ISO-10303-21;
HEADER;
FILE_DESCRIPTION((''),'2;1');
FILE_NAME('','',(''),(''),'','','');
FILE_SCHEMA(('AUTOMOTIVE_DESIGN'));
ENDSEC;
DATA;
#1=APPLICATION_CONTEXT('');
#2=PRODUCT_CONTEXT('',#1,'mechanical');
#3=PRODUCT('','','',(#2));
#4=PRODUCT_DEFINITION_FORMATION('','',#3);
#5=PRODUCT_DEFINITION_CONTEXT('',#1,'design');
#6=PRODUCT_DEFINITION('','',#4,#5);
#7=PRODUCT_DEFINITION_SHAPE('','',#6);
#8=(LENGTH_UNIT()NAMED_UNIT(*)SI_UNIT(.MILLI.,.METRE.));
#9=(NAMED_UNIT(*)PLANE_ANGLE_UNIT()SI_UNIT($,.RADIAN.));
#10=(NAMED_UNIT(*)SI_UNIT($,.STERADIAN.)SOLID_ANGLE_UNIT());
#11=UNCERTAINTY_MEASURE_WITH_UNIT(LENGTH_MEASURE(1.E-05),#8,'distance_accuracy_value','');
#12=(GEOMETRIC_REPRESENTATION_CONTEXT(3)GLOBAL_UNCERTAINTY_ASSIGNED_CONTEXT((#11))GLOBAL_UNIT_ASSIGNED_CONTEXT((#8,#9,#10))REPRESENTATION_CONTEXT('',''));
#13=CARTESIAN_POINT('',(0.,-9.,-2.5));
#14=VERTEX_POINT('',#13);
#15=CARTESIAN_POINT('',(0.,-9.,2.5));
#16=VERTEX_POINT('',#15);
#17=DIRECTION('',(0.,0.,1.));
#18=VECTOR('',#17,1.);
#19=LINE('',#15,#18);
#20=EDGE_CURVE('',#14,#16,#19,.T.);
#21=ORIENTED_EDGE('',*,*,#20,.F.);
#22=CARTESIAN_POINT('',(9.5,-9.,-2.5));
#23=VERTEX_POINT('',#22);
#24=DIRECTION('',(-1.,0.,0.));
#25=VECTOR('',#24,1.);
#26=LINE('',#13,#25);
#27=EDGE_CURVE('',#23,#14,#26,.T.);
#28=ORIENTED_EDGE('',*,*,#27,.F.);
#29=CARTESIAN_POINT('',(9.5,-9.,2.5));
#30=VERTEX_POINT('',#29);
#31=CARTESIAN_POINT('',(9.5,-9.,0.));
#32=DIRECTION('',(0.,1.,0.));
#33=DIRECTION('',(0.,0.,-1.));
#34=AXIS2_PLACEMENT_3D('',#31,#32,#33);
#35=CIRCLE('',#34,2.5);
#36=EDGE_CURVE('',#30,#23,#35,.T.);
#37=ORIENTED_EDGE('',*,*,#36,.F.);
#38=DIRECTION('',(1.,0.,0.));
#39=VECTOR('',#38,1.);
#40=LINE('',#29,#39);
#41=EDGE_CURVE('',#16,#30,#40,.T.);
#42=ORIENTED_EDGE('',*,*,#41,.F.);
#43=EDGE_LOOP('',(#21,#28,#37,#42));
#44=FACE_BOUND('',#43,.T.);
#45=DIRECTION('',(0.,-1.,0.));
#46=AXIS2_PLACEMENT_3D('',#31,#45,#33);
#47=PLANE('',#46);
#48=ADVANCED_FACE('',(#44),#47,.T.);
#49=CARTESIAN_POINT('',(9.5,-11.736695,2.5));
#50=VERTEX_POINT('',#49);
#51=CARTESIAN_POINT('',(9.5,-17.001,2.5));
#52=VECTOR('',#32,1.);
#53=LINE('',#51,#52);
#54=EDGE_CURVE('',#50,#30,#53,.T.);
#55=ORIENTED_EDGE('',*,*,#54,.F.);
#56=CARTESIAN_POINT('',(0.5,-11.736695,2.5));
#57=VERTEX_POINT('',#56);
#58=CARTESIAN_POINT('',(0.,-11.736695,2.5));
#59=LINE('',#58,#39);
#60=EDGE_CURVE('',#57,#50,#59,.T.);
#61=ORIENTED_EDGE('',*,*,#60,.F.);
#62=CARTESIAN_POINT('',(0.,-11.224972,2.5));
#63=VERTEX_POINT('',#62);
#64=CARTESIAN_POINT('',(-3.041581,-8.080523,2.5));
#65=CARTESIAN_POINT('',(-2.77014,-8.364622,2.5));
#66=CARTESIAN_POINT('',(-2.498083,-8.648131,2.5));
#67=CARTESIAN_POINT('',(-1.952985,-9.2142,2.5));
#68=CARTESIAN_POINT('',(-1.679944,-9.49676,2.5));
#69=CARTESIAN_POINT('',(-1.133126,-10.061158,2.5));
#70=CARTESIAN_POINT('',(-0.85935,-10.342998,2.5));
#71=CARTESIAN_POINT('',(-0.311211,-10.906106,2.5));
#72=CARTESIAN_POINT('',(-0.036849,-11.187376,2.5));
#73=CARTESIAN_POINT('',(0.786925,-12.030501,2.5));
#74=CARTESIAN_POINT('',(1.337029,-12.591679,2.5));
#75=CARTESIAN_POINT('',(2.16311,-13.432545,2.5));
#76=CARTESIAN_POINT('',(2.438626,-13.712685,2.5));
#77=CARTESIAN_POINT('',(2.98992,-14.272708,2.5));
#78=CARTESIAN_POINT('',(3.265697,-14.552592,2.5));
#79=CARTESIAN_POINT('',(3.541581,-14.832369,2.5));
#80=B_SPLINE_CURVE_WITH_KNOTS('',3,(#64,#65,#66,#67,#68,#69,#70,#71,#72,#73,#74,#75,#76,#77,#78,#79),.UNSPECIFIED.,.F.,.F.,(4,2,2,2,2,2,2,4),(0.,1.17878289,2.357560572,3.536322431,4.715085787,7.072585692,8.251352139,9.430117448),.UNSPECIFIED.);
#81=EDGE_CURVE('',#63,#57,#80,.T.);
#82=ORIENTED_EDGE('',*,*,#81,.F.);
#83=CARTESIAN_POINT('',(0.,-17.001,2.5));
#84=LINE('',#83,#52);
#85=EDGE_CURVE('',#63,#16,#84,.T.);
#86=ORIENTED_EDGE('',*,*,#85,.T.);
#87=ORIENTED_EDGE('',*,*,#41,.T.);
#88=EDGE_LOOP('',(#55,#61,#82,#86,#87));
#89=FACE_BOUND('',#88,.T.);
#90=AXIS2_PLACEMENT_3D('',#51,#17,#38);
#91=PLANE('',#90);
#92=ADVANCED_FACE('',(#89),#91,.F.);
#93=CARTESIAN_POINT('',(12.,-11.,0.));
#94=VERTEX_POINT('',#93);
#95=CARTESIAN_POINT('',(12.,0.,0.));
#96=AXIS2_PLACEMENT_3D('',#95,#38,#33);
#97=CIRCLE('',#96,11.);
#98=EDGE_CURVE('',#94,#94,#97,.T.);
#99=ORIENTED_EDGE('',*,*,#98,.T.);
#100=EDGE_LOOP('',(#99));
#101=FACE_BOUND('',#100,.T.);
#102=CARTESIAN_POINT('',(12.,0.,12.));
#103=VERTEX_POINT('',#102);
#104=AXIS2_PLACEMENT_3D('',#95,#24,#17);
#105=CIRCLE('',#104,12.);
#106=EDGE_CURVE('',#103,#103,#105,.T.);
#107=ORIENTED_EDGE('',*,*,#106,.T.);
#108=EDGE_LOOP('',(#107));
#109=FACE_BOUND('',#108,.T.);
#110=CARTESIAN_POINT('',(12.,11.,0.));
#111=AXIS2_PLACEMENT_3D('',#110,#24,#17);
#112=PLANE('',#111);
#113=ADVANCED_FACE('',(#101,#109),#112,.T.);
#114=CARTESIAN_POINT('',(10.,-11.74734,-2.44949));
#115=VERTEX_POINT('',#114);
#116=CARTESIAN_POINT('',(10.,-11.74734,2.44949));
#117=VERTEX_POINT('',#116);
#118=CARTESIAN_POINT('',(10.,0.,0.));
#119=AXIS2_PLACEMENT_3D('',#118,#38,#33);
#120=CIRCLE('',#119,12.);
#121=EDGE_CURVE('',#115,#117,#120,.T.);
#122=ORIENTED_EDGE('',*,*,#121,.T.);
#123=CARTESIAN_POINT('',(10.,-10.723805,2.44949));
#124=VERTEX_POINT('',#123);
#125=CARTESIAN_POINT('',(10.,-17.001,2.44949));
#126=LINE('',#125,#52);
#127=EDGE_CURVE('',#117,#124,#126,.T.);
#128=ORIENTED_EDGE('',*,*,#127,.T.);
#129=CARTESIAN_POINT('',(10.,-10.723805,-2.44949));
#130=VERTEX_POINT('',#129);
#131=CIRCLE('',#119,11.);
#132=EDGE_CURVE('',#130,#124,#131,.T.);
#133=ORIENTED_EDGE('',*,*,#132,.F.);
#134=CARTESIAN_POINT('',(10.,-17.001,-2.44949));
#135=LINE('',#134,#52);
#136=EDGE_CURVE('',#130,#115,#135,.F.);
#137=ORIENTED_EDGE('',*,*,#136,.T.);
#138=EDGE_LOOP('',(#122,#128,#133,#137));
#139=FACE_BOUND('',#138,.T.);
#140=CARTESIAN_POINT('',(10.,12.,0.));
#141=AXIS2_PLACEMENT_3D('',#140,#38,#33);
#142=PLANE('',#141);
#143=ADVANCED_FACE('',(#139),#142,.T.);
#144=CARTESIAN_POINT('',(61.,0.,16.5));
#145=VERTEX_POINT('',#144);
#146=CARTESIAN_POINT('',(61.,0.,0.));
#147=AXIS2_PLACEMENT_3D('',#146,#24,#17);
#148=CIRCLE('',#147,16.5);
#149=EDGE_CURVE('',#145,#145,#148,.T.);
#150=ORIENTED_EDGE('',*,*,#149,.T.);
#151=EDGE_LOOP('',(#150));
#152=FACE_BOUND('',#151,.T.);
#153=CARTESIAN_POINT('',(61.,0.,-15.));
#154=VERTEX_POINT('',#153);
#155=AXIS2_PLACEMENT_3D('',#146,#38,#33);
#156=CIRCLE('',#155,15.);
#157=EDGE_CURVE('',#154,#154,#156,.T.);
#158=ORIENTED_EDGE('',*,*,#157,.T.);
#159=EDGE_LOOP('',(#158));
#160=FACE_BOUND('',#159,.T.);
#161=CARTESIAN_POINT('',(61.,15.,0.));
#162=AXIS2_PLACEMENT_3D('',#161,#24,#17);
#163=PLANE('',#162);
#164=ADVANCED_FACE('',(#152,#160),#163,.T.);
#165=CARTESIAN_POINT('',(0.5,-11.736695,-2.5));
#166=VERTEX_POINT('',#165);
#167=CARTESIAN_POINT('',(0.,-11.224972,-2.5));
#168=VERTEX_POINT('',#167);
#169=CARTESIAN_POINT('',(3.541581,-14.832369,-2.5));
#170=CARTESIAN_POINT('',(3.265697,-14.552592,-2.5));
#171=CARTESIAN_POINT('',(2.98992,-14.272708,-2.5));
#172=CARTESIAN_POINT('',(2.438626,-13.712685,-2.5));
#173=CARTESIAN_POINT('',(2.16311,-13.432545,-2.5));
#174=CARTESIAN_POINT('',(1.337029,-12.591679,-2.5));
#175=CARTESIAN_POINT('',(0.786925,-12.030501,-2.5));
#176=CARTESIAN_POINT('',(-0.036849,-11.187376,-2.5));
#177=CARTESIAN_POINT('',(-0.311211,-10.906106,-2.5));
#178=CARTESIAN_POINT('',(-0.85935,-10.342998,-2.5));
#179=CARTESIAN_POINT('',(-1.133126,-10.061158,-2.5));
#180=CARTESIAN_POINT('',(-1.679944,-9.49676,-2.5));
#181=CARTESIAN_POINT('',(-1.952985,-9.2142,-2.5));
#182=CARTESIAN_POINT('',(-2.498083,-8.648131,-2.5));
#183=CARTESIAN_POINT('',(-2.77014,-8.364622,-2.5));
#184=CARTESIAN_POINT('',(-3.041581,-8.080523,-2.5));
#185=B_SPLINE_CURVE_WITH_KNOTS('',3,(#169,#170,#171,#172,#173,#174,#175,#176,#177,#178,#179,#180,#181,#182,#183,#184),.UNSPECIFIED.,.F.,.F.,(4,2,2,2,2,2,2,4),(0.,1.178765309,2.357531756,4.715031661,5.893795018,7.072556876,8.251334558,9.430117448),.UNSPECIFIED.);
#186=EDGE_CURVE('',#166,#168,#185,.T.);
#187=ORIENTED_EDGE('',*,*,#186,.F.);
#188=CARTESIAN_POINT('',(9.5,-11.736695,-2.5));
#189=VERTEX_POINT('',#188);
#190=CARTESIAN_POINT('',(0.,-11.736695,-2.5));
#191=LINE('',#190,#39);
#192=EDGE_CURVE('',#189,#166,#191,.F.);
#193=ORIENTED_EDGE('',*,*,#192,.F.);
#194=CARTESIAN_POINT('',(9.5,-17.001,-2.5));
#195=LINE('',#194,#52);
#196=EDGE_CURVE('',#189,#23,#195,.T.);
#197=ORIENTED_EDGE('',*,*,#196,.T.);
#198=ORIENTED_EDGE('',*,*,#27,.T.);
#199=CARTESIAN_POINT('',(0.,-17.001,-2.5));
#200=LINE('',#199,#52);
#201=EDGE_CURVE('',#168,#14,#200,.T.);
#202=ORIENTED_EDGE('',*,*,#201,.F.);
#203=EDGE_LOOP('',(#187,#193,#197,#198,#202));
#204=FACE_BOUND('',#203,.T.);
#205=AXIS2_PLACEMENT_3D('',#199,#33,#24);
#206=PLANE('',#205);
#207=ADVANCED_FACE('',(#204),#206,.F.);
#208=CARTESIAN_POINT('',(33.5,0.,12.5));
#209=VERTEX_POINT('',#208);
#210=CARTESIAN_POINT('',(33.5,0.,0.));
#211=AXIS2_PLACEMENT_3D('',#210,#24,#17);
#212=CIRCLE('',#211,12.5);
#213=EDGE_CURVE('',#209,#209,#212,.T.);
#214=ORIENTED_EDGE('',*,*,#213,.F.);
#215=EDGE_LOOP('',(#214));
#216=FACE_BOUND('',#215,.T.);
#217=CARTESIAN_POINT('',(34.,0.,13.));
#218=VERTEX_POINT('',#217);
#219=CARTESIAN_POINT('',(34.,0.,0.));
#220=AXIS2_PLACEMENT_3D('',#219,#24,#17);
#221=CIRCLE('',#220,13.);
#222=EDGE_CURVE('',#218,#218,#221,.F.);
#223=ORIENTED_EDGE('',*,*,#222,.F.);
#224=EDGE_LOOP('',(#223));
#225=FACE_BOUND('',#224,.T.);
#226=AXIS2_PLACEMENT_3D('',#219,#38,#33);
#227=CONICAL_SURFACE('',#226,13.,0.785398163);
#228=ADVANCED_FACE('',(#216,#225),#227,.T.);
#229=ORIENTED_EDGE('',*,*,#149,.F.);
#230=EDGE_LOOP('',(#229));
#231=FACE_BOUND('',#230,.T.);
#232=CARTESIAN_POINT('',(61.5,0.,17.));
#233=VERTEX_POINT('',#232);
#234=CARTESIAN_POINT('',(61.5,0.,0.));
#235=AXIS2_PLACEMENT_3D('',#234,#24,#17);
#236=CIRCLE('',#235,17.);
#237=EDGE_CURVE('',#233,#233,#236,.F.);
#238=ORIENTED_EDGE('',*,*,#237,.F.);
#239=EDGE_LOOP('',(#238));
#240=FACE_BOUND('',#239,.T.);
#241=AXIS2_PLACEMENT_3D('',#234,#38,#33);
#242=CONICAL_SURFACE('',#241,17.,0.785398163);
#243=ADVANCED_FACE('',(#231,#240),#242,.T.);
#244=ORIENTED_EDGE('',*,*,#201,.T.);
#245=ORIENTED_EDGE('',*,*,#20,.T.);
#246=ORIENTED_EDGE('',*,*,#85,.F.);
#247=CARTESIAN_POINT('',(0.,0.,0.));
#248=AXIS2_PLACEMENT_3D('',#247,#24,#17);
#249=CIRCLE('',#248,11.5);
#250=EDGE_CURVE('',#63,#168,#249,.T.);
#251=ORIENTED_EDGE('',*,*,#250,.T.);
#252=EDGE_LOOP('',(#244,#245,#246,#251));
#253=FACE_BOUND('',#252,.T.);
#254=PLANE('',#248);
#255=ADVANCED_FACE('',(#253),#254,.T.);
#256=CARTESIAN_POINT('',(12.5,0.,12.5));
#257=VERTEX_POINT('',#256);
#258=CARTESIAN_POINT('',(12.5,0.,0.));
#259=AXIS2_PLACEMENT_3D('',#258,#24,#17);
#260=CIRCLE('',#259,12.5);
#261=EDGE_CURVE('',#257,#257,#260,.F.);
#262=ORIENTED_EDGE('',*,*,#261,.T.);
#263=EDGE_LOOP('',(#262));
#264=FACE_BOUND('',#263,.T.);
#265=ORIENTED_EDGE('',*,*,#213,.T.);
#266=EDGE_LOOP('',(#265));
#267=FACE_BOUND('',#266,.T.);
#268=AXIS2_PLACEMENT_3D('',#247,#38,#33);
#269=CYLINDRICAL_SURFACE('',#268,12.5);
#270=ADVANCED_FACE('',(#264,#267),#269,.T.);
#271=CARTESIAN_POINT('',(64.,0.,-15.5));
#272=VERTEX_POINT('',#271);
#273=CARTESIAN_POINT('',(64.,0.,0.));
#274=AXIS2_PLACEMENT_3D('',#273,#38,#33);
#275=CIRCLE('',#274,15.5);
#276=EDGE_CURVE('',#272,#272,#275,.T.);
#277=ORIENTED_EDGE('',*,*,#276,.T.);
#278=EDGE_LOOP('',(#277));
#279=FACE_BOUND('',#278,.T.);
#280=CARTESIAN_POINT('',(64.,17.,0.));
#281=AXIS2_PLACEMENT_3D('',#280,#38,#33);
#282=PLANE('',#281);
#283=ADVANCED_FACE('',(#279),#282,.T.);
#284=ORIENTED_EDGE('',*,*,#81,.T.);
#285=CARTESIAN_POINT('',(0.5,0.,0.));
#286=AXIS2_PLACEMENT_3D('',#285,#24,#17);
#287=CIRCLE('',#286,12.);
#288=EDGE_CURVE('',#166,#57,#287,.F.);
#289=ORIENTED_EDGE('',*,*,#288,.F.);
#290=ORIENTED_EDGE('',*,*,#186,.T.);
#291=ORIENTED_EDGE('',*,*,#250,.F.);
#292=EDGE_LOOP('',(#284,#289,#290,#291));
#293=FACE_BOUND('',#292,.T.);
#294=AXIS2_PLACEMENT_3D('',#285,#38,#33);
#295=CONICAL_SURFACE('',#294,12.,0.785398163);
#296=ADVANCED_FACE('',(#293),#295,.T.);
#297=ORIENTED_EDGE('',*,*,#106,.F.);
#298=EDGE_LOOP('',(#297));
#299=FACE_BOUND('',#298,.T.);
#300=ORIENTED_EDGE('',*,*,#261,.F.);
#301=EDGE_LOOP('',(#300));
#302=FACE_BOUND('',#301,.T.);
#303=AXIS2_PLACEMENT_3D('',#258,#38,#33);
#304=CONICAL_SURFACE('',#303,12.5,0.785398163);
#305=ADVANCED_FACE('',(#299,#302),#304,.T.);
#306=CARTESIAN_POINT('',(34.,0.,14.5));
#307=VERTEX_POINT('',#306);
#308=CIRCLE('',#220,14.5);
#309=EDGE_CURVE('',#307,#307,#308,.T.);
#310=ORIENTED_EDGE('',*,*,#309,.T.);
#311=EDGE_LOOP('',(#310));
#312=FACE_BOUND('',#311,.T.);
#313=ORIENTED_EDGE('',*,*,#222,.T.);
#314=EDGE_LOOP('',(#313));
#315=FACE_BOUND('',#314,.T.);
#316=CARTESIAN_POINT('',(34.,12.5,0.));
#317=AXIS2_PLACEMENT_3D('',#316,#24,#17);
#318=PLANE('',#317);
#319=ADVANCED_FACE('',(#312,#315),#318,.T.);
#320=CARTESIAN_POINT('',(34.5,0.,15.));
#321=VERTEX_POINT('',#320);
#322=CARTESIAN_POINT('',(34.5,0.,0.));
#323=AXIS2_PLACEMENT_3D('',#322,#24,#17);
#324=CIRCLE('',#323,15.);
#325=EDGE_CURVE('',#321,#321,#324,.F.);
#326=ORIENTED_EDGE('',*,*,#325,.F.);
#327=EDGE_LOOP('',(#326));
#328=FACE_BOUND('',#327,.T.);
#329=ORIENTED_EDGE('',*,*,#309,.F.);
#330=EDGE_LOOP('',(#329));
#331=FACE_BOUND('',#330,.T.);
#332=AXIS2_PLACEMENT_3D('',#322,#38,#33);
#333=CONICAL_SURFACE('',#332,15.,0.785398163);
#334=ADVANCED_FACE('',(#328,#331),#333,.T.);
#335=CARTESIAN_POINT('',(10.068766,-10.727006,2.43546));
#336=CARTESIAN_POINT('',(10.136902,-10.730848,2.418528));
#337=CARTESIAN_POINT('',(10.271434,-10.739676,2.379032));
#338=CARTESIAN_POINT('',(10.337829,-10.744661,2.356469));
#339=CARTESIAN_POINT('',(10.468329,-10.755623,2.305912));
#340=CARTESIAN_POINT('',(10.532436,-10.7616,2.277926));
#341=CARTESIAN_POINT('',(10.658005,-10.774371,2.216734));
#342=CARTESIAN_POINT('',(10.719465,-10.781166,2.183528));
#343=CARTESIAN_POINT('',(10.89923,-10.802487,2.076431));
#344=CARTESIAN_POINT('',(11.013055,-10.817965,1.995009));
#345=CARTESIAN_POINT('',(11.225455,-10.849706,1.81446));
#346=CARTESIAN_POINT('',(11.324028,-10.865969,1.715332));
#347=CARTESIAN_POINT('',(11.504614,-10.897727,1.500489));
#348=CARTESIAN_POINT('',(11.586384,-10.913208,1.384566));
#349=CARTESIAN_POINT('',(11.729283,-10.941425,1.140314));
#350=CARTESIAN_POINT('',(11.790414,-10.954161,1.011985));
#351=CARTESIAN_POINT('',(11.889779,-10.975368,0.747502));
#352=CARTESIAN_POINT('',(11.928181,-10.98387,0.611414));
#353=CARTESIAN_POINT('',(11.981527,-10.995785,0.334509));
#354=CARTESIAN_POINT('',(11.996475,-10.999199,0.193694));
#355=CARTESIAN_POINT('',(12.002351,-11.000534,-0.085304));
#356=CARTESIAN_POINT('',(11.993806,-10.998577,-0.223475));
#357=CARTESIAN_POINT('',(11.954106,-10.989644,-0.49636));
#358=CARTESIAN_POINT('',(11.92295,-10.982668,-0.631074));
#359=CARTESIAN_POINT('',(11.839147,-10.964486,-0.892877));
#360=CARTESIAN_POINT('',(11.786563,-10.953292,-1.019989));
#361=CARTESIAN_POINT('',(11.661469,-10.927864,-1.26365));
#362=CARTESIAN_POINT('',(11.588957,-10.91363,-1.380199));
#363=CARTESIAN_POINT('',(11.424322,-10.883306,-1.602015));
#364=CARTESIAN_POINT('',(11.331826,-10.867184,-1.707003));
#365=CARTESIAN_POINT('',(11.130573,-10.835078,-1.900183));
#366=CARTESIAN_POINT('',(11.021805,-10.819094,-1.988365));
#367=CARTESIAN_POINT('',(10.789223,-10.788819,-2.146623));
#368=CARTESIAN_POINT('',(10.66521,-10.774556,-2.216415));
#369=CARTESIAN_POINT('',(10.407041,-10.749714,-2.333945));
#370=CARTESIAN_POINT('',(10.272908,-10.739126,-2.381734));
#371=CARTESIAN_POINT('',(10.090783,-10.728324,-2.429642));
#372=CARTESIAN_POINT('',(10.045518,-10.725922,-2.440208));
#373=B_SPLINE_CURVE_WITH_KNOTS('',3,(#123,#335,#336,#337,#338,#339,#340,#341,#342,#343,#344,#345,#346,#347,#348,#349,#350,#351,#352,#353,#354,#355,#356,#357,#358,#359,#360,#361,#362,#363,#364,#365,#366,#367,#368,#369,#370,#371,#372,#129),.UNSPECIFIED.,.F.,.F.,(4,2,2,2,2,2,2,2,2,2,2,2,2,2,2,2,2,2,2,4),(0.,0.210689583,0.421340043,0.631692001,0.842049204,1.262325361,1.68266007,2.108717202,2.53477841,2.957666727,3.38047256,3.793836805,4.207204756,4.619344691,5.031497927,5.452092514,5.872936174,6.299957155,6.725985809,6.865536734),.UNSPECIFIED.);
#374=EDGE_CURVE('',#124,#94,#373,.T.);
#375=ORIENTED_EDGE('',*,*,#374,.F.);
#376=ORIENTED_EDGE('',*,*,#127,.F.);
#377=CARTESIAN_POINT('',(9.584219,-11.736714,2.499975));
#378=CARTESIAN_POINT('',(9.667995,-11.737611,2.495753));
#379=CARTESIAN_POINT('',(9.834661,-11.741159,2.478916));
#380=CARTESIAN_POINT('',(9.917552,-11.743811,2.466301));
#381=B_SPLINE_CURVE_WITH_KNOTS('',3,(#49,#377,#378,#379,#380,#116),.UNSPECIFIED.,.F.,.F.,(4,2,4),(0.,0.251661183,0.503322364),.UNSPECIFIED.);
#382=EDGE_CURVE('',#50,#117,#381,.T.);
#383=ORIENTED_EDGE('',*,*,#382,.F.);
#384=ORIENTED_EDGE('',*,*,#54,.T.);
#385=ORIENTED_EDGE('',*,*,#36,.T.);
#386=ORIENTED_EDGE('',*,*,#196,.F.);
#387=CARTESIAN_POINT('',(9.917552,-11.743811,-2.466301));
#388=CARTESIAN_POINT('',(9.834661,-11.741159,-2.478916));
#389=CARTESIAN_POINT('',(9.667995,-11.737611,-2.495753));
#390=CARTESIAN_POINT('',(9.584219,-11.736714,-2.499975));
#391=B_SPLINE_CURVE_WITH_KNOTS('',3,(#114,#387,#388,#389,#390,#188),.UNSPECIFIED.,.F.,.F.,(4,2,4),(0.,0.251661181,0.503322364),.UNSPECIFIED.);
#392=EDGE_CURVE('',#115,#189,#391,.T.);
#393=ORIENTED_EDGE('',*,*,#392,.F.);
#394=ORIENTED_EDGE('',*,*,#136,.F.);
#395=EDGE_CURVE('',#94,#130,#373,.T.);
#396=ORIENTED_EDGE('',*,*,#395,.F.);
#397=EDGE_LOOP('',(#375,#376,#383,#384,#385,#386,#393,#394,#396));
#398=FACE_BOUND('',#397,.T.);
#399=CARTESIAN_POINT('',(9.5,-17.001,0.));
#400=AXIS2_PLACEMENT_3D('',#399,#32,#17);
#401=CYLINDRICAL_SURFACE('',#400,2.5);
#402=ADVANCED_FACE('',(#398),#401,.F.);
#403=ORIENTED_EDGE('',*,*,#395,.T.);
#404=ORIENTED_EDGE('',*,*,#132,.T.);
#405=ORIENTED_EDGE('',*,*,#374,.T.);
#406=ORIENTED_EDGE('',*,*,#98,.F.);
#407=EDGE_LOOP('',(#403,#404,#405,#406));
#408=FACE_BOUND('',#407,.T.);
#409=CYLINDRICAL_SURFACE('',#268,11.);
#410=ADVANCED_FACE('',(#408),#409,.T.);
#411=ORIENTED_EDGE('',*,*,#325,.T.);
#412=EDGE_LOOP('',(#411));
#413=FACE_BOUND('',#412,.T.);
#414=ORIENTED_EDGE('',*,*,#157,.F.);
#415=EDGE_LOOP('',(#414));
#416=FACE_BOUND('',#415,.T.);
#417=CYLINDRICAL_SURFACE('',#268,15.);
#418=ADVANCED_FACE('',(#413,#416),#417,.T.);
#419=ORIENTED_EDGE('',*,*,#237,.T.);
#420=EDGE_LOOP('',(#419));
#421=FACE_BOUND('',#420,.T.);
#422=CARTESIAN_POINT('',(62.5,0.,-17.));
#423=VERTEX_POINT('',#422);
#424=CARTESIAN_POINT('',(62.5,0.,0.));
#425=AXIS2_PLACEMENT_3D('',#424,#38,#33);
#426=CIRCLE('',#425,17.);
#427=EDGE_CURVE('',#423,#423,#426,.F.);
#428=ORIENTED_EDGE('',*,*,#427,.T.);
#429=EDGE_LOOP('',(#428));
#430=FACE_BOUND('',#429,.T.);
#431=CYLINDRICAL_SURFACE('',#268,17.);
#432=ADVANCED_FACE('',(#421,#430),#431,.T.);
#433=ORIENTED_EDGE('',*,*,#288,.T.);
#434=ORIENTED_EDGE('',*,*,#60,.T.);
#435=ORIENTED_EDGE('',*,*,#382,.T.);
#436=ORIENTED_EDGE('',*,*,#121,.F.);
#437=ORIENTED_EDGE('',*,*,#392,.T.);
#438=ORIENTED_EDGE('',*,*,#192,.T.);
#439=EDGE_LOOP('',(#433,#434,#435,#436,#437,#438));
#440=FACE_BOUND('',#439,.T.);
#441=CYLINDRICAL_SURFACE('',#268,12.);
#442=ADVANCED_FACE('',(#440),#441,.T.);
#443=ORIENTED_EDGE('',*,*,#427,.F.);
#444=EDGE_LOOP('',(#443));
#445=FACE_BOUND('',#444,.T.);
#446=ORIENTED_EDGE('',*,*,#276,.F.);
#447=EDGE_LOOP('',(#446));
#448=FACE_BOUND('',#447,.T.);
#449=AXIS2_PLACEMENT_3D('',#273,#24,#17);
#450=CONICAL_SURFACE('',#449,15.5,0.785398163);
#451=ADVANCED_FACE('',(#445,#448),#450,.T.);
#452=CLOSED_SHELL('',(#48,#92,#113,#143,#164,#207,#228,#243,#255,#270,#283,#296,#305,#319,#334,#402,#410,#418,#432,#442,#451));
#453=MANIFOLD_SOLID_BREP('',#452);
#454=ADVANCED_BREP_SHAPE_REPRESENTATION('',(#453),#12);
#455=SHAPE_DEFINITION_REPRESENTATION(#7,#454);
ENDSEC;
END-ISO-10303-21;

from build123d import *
from build123d.topology import SkipClean

# Parameters (mm, degrees)
CHAMFER_1_SIZE      = 1.5
CHAMFER_2_SIZE      = 0.5
CUT_EXTRUDE_START   = -3
CUT_EXTRUDE_1_DEPTH = 3


# Read off the part's stored shape, not the designer's step: 切除-拉伸1
with BuildPart() as part:
    # 草图1 → 旋转1 (revolve)
    with BuildSketch(Plane.XY, mode=Mode.PRIVATE) as revolve_1_sk:
        Polygon((0, 0), (0, 12), (10, 12), (10, 11), (12, 11), (12, 12.5), (34, 12.5), (34, 15), (61, 15), (61, 17), (64, 17), (64, 0), align=None)
    revolve(revolve_1_sk.sketch.rotate(Axis((0, 0, 0), (-1, 0, 0)), 90), axis=Axis((0, 0, 0), (-1, 0, 0)))

    # 倒角1
    chamfer_1_edges = [part.edges().sort_by_distance(p)[0] for p in [
        (64, 0, 17),
    ]]
    chamfer(chamfer_1_edges, length=CHAMFER_1_SIZE)

    # 倒角2
    chamfer_2_edges = [part.edges().sort_by_distance(p)[0] for p in [
        (61, 0, 17),
        (34, 0, 15),
        (34, 0, 12.5),
        (12, 0, 12.5),
        (0, 0, 12),
    ]]
    chamfer(chamfer_2_edges, length=CHAMFER_2_SIZE)

    # 切除-拉伸1 outline → 切除-拉伸1 (cut)
    with SkipClean():  # the faces are left unmerged after this step: merging them gives an invalid solid
        with BuildSketch(Plane(origin=(0, -9, 0), x_dir=(1, 0, 0), z_dir=(0, 1, 0)).offset(CUT_EXTRUDE_START)):
            with BuildLine():
                Line((9.5, 2.5), (0, 2.5))
                Line((0, 2.5), (0, -2.5))
                Line((0, -2.5), (9.5, -2.5))
                ThreePointArc((9.5, -2.5), (12, 0), (9.5, 2.5))
            make_face()
        extrude(amount=CUT_EXTRUDE_1_DEPTH, mode=Mode.SUBTRACT)


solid = part.part
